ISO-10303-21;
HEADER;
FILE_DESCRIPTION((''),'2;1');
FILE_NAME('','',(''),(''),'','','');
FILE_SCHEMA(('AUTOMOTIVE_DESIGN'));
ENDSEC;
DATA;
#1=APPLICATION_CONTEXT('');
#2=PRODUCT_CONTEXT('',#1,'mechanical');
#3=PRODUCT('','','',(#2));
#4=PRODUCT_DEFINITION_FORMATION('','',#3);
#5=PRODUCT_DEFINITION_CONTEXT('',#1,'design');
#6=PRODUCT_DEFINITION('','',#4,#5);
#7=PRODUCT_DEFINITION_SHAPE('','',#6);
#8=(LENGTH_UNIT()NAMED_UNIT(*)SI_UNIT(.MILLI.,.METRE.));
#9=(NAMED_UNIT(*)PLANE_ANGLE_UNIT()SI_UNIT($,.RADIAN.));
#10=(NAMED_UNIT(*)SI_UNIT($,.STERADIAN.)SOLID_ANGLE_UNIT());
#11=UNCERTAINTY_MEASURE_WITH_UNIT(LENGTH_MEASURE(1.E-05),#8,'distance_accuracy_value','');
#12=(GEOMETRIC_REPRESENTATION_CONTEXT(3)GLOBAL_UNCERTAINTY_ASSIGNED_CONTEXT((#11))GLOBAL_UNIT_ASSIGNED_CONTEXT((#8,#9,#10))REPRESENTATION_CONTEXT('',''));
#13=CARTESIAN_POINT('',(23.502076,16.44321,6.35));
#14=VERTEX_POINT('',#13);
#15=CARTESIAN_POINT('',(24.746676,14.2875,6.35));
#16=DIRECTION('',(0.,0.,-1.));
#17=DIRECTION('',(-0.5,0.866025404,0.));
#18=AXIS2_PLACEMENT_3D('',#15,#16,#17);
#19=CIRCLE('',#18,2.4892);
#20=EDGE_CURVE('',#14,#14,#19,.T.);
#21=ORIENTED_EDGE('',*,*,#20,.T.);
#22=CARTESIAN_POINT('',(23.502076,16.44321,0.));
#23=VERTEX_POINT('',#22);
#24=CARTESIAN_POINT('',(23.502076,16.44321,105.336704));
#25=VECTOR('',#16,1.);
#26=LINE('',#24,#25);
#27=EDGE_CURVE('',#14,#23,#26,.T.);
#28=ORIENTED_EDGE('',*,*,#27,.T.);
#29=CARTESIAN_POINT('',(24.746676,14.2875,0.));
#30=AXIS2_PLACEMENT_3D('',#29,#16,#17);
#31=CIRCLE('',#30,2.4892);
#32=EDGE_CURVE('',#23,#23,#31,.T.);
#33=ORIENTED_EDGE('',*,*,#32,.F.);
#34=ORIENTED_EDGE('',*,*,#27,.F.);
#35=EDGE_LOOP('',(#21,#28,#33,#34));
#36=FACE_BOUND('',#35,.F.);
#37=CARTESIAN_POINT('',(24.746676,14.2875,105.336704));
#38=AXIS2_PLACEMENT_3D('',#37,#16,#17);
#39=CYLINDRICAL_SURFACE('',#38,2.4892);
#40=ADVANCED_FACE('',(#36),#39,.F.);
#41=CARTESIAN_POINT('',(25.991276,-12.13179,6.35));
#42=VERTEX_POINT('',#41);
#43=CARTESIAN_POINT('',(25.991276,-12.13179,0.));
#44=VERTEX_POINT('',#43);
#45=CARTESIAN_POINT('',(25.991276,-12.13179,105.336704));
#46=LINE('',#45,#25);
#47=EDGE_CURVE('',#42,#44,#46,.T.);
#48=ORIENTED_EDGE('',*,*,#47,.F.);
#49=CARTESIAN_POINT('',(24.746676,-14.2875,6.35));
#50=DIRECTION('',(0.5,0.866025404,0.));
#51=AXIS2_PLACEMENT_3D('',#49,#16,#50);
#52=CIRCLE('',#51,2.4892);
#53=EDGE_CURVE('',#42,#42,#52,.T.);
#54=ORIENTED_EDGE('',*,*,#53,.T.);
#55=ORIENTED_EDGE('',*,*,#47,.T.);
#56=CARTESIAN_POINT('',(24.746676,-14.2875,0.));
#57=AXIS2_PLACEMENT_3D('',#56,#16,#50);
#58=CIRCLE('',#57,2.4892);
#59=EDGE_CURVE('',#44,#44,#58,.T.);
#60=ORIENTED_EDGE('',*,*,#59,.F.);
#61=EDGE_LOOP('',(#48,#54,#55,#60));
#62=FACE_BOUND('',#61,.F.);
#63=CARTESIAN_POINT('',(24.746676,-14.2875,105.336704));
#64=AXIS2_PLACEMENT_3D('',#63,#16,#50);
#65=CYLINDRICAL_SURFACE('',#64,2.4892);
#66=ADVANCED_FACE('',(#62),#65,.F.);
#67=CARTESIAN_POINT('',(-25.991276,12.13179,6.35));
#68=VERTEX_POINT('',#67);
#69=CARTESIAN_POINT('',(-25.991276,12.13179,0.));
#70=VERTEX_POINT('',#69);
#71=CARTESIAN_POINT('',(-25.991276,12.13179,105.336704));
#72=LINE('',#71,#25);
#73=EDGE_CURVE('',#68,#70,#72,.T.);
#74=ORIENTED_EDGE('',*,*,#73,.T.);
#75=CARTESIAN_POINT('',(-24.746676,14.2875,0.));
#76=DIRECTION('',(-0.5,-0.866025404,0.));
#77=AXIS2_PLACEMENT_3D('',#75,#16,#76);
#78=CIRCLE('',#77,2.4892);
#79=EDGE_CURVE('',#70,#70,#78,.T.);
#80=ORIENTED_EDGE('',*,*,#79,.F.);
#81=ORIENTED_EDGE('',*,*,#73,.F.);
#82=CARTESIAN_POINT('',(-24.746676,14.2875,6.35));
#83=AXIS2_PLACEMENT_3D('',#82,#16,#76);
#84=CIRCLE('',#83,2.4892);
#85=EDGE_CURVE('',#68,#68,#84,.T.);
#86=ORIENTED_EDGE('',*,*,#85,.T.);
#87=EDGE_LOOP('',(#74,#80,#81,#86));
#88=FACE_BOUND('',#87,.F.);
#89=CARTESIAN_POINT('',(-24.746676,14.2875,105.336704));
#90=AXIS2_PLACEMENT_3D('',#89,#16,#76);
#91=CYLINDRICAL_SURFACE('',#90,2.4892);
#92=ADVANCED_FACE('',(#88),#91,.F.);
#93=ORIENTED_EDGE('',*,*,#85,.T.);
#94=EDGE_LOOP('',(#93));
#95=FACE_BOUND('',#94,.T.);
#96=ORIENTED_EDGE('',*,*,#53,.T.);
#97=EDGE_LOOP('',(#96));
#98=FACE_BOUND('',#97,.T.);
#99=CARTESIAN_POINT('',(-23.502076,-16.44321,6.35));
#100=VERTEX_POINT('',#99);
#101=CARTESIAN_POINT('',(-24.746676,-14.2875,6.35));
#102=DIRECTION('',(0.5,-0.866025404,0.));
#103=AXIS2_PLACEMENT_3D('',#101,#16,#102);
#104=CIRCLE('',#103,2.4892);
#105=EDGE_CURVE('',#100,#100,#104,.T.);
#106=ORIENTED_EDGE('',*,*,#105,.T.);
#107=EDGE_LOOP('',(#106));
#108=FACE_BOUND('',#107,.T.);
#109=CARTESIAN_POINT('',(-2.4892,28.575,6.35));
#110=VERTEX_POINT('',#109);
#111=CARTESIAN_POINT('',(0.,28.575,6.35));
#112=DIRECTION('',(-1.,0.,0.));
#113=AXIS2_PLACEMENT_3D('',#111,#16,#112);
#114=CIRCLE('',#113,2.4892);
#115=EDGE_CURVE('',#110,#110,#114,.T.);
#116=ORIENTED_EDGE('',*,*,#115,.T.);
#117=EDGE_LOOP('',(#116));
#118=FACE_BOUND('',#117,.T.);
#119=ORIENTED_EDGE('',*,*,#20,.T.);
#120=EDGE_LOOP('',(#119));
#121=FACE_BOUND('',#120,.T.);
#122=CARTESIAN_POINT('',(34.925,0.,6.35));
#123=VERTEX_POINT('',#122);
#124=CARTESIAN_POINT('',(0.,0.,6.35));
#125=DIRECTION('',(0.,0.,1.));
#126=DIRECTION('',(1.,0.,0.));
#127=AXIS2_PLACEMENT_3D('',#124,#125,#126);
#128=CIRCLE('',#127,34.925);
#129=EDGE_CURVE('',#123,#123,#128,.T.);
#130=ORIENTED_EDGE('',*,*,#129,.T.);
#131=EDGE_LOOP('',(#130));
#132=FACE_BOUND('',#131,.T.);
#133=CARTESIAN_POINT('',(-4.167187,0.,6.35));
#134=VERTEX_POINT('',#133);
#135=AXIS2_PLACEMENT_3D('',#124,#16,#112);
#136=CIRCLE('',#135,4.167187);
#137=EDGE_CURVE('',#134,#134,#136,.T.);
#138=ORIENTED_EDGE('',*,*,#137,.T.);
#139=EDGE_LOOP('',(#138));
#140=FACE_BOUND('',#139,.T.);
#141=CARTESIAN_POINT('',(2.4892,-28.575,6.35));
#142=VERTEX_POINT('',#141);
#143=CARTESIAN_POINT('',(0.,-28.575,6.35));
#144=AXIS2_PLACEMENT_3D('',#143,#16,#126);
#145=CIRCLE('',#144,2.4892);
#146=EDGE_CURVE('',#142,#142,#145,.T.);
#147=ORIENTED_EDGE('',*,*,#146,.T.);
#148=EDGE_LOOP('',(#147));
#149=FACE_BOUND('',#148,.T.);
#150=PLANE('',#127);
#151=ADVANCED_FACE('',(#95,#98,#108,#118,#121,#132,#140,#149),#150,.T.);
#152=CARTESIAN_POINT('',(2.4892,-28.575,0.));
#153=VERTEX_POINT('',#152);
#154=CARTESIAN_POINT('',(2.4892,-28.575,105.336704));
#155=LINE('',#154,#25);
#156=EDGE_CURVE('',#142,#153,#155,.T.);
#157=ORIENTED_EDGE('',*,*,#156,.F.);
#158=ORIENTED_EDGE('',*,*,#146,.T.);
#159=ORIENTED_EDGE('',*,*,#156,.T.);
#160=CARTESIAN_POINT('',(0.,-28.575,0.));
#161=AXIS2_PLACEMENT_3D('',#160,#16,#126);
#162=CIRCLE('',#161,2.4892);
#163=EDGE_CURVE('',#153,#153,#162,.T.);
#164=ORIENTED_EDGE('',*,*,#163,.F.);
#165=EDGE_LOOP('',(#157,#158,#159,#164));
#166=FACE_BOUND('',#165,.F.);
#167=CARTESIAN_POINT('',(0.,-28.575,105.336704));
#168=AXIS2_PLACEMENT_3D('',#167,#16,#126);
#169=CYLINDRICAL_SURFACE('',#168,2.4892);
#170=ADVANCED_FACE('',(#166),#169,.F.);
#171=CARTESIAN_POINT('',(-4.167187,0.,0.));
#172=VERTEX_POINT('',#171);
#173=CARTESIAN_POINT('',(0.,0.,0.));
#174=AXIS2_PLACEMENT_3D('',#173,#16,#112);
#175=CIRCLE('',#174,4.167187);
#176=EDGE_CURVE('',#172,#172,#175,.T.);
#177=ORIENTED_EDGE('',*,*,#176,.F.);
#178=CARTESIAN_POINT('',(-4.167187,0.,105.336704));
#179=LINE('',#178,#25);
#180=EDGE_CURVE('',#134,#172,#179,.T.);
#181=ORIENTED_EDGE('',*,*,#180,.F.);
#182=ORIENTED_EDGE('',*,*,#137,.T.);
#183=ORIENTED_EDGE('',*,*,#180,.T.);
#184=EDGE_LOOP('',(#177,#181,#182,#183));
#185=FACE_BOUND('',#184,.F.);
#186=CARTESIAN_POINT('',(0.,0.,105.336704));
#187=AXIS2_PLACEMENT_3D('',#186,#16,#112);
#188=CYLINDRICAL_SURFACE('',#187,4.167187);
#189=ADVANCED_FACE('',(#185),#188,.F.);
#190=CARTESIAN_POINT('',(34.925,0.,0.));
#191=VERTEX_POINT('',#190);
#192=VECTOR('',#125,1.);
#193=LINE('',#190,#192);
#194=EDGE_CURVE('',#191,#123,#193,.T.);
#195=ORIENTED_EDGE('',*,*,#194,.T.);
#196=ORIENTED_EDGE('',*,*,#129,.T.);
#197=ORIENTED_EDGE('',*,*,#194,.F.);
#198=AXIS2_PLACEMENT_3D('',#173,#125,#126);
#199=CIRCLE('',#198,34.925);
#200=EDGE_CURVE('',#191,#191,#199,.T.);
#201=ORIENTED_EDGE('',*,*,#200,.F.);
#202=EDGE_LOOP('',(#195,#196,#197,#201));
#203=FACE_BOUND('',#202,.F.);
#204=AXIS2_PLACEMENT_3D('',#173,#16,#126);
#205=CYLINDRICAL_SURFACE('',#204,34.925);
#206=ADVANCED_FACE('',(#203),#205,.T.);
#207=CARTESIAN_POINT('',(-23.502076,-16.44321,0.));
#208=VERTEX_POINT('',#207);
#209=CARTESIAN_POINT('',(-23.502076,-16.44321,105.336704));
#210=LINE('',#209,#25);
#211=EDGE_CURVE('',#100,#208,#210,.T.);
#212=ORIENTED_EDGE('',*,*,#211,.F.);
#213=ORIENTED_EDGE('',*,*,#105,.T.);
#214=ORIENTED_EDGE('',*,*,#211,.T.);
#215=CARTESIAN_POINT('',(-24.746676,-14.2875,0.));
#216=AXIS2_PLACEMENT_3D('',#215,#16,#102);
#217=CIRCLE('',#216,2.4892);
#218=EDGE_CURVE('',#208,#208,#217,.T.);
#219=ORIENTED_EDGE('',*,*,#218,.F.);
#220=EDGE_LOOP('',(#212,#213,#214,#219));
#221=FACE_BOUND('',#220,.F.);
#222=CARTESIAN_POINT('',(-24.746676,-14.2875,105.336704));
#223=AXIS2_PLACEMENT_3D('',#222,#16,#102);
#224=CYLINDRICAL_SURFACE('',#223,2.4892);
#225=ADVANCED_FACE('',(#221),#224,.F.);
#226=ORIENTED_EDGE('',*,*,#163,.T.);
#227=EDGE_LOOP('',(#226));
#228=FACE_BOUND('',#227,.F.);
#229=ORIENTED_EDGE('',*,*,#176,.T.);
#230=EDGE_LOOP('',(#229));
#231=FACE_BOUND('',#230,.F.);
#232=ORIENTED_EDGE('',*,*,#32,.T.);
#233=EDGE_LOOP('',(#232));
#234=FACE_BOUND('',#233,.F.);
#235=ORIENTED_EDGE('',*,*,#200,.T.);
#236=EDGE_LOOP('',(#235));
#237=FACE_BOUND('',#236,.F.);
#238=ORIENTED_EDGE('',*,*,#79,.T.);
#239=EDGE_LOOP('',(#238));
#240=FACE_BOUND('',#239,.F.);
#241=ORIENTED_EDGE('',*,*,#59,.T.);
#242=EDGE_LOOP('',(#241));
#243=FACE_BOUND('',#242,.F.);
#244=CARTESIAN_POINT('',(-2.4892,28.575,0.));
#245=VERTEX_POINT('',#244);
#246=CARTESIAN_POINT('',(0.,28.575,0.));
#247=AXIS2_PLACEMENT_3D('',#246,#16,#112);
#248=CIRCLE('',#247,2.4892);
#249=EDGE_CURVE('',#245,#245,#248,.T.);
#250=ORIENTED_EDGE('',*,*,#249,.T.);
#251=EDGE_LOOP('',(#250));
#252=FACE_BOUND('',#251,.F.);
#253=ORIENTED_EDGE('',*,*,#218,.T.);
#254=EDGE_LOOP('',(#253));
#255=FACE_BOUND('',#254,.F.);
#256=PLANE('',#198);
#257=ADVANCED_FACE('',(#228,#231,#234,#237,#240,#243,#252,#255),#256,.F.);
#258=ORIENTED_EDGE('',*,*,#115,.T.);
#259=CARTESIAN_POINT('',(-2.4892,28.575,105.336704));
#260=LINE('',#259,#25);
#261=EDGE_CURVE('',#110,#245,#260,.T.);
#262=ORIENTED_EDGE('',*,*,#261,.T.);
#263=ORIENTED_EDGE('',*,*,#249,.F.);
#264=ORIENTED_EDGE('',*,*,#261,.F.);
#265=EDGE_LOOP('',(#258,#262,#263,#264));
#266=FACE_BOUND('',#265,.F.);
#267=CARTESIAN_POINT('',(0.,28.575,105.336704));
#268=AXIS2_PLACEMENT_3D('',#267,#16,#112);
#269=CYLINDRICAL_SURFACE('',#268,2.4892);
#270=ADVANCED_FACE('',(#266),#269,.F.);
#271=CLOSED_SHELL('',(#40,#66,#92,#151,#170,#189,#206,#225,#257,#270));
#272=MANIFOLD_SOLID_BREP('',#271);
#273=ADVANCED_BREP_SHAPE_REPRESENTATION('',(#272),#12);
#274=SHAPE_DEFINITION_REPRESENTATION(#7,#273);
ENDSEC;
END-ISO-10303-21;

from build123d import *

# Parameters (mm, degrees)
F0_R            = 34.925
F1_DEPTH        = 6.35
F3_D            = 4.9784
F3_COPIES_COUNT = 6
F5_D            = 8.334375


# Not quite as in the source:
# - a pattern or mirror of a feature is missing from the dataset's text; its kind, count and spacing are read off the source's solid


with BuildPart() as f1:
    # F0 (on Top) → F1 (new body)
    with BuildSketch(Plane.XY):
        Circle(F0_R)
    extrude(amount=F1_DEPTH)

    # F3 (through all)
    with Locations(Plane.XY.offset(6.35)):
        with Locations((0, 28.575)):
            f3 = Hole(F3_D / 2)

    # F3_copies: F3 ×6 about axis
    f3_copies_axis = Axis((0, 0, 0), (0, 0, 1))
    for i in range(1, F3_COPIES_COUNT):
        add(f3.rotate(f3_copies_axis, i * 360 / F3_COPIES_COUNT), mode=Mode.SUBTRACT)

    # F5 (through all)
    with Locations(Plane.XY.offset(6.35)):
        with Locations((0, 0)):
            Hole(F5_D / 2)


solid = f1.part
